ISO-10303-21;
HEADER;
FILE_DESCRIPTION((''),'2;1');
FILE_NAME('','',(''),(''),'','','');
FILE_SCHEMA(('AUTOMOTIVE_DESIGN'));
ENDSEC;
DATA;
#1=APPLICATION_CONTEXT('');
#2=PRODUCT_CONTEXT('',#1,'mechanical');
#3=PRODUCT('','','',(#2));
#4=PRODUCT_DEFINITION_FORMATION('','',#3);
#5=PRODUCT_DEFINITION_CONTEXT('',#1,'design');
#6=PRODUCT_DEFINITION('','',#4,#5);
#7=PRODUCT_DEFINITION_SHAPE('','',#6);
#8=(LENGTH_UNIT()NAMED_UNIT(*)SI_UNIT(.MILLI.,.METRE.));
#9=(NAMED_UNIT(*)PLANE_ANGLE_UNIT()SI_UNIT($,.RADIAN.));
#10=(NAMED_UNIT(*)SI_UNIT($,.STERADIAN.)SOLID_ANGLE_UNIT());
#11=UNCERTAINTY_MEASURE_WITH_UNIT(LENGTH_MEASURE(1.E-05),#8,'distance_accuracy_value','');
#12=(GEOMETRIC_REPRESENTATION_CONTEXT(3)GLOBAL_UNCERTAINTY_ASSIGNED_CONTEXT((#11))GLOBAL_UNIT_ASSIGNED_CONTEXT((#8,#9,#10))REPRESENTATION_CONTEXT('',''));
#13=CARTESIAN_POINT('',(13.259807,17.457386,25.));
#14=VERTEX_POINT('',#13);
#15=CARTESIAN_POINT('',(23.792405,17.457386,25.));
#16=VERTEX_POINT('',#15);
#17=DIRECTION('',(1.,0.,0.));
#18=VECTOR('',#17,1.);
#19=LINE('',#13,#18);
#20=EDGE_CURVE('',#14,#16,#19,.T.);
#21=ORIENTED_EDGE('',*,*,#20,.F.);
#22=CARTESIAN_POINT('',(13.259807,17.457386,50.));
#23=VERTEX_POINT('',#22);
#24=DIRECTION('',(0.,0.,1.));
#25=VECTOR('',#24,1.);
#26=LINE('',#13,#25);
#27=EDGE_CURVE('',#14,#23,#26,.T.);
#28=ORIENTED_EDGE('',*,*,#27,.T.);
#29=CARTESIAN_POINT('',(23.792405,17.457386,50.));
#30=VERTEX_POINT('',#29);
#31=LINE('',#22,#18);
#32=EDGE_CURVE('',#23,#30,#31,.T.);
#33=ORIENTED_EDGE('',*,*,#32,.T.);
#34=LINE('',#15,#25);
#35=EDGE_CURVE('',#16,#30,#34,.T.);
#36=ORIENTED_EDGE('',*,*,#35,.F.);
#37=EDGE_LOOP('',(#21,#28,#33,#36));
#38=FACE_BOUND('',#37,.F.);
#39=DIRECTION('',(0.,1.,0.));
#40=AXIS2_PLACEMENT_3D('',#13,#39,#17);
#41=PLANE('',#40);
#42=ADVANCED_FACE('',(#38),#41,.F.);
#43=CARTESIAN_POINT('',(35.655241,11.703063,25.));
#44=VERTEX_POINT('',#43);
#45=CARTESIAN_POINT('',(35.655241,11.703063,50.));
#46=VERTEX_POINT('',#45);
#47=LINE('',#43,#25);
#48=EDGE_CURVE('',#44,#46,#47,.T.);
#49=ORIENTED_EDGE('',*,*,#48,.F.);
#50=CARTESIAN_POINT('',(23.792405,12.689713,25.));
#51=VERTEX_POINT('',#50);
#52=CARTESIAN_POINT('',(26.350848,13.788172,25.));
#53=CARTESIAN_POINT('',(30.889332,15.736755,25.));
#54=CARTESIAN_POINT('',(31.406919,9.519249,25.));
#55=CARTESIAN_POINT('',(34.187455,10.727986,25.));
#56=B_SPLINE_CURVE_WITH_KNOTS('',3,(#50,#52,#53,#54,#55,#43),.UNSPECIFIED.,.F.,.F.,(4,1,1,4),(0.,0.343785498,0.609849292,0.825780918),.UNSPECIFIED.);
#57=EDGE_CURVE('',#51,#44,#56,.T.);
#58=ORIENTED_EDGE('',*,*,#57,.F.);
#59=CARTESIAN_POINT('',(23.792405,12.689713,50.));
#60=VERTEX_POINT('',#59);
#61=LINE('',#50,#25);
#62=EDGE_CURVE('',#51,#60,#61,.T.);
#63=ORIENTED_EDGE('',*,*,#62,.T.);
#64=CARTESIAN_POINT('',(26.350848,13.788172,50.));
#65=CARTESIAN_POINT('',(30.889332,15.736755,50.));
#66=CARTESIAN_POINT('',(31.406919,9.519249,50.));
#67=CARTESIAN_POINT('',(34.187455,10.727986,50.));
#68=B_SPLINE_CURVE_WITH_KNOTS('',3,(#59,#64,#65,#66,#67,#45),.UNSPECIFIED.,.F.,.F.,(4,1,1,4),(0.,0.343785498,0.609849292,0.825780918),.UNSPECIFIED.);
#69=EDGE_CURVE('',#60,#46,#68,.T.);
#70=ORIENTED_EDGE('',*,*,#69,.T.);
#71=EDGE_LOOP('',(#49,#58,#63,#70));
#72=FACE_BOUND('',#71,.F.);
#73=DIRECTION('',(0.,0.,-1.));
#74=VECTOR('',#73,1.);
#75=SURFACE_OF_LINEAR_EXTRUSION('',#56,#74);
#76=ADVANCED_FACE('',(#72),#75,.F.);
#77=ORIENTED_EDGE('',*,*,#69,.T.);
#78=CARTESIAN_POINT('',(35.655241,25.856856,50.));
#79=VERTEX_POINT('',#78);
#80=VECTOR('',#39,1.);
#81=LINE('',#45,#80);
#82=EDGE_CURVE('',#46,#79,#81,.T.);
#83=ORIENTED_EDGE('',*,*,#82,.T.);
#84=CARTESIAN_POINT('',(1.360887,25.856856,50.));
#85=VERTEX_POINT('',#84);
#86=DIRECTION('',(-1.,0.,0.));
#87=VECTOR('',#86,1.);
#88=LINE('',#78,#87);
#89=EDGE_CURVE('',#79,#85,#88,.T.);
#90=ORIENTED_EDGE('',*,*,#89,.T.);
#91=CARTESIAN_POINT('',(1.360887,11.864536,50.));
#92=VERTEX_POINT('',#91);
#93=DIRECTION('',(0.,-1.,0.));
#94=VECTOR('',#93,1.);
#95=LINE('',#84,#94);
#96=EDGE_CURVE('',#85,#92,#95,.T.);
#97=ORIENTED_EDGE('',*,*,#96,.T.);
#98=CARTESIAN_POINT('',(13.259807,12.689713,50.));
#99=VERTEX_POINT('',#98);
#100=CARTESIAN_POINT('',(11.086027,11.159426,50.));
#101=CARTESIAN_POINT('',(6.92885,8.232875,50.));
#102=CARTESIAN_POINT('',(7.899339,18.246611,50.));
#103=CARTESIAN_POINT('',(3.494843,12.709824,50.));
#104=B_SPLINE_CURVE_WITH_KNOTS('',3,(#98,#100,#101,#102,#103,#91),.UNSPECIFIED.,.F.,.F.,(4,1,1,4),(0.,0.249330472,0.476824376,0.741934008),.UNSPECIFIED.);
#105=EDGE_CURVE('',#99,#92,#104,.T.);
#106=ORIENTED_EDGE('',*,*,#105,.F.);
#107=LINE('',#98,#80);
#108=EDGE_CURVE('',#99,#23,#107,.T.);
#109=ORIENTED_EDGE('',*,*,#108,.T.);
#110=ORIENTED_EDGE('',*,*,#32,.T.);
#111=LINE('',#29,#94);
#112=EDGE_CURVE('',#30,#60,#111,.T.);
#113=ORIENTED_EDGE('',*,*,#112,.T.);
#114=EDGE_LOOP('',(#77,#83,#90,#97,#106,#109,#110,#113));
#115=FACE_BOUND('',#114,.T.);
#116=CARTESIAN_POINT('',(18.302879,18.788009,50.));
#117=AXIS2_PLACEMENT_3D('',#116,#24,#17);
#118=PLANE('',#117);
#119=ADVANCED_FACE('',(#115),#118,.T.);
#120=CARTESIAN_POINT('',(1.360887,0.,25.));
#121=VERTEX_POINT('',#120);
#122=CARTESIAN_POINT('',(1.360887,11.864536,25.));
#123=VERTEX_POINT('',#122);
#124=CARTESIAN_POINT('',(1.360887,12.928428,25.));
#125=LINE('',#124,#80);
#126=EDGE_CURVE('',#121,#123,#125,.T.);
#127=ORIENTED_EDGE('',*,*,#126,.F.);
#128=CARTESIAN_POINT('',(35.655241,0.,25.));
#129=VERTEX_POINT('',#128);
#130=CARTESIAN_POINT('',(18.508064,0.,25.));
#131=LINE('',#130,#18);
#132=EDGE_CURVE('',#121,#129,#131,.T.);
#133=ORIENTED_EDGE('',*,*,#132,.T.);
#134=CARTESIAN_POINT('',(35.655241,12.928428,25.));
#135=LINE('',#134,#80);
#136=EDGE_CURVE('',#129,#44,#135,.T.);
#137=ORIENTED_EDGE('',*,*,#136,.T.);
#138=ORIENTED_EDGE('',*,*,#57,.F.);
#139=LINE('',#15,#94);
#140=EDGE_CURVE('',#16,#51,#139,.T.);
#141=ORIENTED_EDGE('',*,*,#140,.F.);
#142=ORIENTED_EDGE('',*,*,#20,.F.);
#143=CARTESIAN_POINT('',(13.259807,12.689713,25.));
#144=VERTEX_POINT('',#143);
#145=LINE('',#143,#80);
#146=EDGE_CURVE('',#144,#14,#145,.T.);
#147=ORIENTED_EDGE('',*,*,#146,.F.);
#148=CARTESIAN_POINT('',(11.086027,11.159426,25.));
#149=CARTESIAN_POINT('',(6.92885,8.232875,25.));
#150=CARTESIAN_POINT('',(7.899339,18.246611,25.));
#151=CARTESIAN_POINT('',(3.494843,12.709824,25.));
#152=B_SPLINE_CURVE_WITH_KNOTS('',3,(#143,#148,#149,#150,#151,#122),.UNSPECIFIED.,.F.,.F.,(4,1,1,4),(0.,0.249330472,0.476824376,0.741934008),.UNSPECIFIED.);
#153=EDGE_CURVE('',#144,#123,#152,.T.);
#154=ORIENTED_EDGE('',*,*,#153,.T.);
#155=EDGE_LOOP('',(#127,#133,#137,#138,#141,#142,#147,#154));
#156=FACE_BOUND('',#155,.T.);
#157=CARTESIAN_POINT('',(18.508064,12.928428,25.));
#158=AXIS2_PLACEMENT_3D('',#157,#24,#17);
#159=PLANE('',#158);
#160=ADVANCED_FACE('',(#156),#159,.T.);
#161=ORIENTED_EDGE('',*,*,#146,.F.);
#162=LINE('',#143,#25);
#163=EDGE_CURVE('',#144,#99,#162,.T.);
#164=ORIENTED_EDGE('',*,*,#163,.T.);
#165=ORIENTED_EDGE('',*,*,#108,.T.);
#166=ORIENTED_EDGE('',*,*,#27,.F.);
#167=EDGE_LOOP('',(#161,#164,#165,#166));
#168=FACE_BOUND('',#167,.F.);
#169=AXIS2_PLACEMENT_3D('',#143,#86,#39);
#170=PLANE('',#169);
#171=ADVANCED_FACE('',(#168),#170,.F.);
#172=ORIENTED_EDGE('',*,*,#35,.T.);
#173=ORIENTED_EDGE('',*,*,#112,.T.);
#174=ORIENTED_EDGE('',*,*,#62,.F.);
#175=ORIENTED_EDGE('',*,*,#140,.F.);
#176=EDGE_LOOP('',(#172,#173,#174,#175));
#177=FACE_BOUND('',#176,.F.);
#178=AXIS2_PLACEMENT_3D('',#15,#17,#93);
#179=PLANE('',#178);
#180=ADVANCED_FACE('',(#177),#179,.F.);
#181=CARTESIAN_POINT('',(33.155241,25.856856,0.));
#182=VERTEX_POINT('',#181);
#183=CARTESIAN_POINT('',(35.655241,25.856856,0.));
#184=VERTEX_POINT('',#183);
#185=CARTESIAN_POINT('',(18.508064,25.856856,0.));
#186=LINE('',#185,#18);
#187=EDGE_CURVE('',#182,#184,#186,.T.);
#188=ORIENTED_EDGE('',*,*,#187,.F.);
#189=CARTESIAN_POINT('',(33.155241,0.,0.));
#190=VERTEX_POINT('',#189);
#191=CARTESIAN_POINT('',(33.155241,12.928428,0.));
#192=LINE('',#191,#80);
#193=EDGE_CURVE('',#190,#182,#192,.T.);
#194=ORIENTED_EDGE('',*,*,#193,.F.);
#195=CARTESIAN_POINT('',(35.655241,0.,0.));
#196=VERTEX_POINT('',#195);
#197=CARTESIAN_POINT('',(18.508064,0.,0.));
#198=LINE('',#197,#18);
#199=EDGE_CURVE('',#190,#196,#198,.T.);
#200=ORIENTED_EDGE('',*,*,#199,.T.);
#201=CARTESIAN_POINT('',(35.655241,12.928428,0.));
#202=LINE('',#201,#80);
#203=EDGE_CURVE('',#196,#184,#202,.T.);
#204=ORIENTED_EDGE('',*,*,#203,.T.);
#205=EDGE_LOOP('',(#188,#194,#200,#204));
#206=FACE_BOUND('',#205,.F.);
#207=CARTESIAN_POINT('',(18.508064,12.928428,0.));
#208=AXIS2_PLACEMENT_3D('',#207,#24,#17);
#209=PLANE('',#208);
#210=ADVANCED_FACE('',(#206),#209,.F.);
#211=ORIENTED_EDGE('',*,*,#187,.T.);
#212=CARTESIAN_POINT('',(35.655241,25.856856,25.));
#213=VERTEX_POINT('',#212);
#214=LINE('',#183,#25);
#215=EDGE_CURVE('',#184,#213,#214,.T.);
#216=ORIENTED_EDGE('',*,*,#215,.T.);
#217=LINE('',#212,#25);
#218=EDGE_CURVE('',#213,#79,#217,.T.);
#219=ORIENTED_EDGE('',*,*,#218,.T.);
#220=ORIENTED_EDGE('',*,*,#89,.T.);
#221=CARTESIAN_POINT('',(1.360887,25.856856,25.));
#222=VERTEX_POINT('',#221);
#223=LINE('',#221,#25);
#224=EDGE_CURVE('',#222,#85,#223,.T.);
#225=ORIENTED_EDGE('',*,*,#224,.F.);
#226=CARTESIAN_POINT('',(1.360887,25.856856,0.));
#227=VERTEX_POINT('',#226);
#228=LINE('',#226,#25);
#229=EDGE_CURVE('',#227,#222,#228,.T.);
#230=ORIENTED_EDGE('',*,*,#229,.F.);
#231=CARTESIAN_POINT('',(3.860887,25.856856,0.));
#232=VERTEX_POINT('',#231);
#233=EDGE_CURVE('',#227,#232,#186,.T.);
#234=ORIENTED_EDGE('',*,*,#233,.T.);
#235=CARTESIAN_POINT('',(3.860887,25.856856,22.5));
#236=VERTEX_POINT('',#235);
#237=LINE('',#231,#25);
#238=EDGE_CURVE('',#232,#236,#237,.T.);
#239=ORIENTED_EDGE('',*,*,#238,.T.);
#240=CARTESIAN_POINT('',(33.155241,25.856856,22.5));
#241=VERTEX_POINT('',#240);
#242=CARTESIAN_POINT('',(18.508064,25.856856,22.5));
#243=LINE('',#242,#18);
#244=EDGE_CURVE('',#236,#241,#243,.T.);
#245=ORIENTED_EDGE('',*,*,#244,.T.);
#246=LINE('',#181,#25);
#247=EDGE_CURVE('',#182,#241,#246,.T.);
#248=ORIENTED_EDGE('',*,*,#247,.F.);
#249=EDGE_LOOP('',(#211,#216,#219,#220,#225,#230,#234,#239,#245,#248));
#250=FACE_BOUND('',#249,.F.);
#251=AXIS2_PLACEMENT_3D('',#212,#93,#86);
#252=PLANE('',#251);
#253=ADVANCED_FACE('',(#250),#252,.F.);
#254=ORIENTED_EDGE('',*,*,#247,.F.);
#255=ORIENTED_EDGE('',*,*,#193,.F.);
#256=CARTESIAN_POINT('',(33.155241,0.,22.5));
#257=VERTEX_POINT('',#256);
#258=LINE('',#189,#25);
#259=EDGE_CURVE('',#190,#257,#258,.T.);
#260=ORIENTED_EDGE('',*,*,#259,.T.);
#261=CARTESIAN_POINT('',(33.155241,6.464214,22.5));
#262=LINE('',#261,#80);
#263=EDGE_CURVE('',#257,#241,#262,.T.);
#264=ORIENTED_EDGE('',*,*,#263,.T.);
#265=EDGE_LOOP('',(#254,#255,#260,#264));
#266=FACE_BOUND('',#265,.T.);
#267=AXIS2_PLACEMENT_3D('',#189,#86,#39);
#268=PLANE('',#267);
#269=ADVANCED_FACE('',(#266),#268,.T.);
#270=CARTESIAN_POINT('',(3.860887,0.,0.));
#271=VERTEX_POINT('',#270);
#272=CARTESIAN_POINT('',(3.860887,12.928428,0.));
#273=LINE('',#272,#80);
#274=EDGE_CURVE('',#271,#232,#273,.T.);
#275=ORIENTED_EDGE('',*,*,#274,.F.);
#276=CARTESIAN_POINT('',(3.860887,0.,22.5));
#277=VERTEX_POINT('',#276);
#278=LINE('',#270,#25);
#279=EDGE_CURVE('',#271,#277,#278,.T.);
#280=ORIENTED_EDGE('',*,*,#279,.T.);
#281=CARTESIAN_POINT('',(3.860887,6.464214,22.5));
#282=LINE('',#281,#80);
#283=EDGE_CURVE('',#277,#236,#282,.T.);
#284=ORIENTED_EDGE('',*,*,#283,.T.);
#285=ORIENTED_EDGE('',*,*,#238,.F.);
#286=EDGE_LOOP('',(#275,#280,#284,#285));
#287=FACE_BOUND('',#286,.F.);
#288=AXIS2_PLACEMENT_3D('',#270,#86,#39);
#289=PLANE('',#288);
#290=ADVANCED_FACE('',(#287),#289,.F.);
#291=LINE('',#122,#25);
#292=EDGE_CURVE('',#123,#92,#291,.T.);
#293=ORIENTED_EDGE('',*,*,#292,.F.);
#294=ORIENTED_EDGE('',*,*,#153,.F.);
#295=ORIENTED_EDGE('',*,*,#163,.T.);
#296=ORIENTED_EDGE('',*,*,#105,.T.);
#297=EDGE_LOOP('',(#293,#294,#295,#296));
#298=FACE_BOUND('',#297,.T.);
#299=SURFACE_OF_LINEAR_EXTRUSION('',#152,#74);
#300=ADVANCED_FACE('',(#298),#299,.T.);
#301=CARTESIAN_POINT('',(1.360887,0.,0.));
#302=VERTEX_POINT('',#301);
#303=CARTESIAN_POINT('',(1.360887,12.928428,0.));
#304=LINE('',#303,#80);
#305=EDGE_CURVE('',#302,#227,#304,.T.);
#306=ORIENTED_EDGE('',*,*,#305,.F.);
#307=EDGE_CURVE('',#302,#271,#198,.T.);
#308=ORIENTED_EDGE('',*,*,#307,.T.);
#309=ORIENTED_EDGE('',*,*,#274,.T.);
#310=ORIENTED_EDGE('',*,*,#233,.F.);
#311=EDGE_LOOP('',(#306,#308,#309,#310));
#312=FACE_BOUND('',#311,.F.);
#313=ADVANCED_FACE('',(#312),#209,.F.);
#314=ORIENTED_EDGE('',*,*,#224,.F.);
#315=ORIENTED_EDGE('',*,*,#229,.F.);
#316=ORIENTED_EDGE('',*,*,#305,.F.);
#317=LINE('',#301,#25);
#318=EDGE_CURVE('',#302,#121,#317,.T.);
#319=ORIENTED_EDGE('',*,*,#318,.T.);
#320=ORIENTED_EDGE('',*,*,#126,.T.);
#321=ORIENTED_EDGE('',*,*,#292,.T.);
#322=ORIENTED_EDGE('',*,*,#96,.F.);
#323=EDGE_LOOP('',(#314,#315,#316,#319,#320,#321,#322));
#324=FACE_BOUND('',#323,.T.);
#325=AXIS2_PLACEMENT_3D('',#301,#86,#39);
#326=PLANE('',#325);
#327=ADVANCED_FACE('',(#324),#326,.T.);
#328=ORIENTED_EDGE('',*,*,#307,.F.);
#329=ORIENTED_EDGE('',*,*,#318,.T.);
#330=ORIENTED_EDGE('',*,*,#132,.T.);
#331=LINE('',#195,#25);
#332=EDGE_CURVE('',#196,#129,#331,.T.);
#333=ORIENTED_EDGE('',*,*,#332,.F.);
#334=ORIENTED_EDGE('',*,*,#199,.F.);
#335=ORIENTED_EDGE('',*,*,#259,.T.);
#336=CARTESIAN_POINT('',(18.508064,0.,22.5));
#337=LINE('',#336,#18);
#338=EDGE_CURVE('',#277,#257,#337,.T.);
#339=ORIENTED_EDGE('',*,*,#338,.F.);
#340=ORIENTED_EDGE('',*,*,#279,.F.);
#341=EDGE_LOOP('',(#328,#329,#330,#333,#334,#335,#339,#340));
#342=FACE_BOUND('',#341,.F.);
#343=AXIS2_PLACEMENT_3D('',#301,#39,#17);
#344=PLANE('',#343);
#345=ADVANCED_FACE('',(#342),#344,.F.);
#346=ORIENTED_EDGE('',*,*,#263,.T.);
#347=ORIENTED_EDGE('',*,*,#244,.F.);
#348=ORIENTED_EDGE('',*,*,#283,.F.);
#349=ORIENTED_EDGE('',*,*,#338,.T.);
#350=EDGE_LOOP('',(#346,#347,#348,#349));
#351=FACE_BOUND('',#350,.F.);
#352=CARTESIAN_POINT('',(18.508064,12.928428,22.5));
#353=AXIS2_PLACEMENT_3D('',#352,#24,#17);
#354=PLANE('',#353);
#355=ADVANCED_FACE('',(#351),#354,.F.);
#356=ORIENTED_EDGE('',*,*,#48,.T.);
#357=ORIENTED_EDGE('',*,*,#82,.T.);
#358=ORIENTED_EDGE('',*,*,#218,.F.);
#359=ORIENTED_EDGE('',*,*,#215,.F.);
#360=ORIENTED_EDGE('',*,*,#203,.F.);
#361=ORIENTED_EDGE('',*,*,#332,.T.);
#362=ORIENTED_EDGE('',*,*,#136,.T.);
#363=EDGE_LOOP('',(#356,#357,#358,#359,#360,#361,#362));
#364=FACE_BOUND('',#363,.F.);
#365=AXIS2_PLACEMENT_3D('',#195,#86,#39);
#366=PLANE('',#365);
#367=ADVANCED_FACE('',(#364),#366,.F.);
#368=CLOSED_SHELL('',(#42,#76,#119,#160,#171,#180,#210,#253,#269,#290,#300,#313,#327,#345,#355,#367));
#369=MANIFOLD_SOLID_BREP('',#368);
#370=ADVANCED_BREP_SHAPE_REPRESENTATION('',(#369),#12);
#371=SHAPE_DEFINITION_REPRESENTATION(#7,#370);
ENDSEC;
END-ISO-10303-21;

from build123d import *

# Parameters (mm, degrees)
F0_W     = 34.2943547294
F0_H     = 25.8568562567
F1_DEPTH = 25
F2_T     = -2.5
F4_DEPTH = 25


with BuildPart() as f1:
    # F0 (on Top) → F1 (new body)
    with BuildSketch(Plane.XY):
        with Locations((18.5080640949, 12.9284281284)):
            Rectangle(F0_W, F0_H)
    extrude(amount=F1_DEPTH)

    # F2
    f2_openings = [f1.faces().sort_by_distance(p)[0] for p in [
        (18.508064, 25.856856, 12.5),
        (18.508064, 0, 12.5),
        (18.508064, 12.928428, 0),
    ]]
    offset(amount=F2_T, openings=f2_openings)

    # F3 (on face) → F4 (join)
    with BuildSketch(Plane.XY.offset(25)):
        with BuildLine():
            Line((13.2598066702, 17.4573864788), (23.7924046814, 17.4573864788))
            Line((23.7924046814, 17.4573864788), (23.7924046814, 12.689712923))
            add(Edge.make_bspline(
                [(23.7924046814, 12.689712923), (26.3508480961, 13.7881721519), (30.8893318732, 15.7367551698), (31.4069191474, 9.5192493209), (34.1874553016, 10.727986267), (35.6552414596, 11.7030631088)],
                knots=[0, 0, 0, 0, 0.343785498, 0.6098492922, 0.8257809177, 0.8257809177, 0.8257809177, 0.8257809177], degree=3))
            Line((35.6552414596, 11.7030631088), (35.6552414596, 25.8568562567))
            Line((35.6552414596, 25.8568562567), (1.3608867303, 25.8568562567))
            Line((1.3608867303, 25.8568562567), (1.3608867303, 11.8645355105))
            add(Edge.make_bspline(
                [(13.2598066702, 12.689712923), (11.0860272045, 11.1594255192), (6.9288496698, 8.2328745434), (7.8993387733, 18.2466111056), (3.4948427482, 12.7098239865), (1.3608867303, 11.8645355105)],
                knots=[0, 0, 0, 0, 0.2493304721, 0.476824376, 0.7419340081, 0.7419340081, 0.7419340081, 0.7419340081], degree=3))
            Line((13.2598066702, 12.689712923), (13.2598066702, 17.4573864788))
        make_face()
    extrude(amount=F4_DEPTH)


solid = f1.part
